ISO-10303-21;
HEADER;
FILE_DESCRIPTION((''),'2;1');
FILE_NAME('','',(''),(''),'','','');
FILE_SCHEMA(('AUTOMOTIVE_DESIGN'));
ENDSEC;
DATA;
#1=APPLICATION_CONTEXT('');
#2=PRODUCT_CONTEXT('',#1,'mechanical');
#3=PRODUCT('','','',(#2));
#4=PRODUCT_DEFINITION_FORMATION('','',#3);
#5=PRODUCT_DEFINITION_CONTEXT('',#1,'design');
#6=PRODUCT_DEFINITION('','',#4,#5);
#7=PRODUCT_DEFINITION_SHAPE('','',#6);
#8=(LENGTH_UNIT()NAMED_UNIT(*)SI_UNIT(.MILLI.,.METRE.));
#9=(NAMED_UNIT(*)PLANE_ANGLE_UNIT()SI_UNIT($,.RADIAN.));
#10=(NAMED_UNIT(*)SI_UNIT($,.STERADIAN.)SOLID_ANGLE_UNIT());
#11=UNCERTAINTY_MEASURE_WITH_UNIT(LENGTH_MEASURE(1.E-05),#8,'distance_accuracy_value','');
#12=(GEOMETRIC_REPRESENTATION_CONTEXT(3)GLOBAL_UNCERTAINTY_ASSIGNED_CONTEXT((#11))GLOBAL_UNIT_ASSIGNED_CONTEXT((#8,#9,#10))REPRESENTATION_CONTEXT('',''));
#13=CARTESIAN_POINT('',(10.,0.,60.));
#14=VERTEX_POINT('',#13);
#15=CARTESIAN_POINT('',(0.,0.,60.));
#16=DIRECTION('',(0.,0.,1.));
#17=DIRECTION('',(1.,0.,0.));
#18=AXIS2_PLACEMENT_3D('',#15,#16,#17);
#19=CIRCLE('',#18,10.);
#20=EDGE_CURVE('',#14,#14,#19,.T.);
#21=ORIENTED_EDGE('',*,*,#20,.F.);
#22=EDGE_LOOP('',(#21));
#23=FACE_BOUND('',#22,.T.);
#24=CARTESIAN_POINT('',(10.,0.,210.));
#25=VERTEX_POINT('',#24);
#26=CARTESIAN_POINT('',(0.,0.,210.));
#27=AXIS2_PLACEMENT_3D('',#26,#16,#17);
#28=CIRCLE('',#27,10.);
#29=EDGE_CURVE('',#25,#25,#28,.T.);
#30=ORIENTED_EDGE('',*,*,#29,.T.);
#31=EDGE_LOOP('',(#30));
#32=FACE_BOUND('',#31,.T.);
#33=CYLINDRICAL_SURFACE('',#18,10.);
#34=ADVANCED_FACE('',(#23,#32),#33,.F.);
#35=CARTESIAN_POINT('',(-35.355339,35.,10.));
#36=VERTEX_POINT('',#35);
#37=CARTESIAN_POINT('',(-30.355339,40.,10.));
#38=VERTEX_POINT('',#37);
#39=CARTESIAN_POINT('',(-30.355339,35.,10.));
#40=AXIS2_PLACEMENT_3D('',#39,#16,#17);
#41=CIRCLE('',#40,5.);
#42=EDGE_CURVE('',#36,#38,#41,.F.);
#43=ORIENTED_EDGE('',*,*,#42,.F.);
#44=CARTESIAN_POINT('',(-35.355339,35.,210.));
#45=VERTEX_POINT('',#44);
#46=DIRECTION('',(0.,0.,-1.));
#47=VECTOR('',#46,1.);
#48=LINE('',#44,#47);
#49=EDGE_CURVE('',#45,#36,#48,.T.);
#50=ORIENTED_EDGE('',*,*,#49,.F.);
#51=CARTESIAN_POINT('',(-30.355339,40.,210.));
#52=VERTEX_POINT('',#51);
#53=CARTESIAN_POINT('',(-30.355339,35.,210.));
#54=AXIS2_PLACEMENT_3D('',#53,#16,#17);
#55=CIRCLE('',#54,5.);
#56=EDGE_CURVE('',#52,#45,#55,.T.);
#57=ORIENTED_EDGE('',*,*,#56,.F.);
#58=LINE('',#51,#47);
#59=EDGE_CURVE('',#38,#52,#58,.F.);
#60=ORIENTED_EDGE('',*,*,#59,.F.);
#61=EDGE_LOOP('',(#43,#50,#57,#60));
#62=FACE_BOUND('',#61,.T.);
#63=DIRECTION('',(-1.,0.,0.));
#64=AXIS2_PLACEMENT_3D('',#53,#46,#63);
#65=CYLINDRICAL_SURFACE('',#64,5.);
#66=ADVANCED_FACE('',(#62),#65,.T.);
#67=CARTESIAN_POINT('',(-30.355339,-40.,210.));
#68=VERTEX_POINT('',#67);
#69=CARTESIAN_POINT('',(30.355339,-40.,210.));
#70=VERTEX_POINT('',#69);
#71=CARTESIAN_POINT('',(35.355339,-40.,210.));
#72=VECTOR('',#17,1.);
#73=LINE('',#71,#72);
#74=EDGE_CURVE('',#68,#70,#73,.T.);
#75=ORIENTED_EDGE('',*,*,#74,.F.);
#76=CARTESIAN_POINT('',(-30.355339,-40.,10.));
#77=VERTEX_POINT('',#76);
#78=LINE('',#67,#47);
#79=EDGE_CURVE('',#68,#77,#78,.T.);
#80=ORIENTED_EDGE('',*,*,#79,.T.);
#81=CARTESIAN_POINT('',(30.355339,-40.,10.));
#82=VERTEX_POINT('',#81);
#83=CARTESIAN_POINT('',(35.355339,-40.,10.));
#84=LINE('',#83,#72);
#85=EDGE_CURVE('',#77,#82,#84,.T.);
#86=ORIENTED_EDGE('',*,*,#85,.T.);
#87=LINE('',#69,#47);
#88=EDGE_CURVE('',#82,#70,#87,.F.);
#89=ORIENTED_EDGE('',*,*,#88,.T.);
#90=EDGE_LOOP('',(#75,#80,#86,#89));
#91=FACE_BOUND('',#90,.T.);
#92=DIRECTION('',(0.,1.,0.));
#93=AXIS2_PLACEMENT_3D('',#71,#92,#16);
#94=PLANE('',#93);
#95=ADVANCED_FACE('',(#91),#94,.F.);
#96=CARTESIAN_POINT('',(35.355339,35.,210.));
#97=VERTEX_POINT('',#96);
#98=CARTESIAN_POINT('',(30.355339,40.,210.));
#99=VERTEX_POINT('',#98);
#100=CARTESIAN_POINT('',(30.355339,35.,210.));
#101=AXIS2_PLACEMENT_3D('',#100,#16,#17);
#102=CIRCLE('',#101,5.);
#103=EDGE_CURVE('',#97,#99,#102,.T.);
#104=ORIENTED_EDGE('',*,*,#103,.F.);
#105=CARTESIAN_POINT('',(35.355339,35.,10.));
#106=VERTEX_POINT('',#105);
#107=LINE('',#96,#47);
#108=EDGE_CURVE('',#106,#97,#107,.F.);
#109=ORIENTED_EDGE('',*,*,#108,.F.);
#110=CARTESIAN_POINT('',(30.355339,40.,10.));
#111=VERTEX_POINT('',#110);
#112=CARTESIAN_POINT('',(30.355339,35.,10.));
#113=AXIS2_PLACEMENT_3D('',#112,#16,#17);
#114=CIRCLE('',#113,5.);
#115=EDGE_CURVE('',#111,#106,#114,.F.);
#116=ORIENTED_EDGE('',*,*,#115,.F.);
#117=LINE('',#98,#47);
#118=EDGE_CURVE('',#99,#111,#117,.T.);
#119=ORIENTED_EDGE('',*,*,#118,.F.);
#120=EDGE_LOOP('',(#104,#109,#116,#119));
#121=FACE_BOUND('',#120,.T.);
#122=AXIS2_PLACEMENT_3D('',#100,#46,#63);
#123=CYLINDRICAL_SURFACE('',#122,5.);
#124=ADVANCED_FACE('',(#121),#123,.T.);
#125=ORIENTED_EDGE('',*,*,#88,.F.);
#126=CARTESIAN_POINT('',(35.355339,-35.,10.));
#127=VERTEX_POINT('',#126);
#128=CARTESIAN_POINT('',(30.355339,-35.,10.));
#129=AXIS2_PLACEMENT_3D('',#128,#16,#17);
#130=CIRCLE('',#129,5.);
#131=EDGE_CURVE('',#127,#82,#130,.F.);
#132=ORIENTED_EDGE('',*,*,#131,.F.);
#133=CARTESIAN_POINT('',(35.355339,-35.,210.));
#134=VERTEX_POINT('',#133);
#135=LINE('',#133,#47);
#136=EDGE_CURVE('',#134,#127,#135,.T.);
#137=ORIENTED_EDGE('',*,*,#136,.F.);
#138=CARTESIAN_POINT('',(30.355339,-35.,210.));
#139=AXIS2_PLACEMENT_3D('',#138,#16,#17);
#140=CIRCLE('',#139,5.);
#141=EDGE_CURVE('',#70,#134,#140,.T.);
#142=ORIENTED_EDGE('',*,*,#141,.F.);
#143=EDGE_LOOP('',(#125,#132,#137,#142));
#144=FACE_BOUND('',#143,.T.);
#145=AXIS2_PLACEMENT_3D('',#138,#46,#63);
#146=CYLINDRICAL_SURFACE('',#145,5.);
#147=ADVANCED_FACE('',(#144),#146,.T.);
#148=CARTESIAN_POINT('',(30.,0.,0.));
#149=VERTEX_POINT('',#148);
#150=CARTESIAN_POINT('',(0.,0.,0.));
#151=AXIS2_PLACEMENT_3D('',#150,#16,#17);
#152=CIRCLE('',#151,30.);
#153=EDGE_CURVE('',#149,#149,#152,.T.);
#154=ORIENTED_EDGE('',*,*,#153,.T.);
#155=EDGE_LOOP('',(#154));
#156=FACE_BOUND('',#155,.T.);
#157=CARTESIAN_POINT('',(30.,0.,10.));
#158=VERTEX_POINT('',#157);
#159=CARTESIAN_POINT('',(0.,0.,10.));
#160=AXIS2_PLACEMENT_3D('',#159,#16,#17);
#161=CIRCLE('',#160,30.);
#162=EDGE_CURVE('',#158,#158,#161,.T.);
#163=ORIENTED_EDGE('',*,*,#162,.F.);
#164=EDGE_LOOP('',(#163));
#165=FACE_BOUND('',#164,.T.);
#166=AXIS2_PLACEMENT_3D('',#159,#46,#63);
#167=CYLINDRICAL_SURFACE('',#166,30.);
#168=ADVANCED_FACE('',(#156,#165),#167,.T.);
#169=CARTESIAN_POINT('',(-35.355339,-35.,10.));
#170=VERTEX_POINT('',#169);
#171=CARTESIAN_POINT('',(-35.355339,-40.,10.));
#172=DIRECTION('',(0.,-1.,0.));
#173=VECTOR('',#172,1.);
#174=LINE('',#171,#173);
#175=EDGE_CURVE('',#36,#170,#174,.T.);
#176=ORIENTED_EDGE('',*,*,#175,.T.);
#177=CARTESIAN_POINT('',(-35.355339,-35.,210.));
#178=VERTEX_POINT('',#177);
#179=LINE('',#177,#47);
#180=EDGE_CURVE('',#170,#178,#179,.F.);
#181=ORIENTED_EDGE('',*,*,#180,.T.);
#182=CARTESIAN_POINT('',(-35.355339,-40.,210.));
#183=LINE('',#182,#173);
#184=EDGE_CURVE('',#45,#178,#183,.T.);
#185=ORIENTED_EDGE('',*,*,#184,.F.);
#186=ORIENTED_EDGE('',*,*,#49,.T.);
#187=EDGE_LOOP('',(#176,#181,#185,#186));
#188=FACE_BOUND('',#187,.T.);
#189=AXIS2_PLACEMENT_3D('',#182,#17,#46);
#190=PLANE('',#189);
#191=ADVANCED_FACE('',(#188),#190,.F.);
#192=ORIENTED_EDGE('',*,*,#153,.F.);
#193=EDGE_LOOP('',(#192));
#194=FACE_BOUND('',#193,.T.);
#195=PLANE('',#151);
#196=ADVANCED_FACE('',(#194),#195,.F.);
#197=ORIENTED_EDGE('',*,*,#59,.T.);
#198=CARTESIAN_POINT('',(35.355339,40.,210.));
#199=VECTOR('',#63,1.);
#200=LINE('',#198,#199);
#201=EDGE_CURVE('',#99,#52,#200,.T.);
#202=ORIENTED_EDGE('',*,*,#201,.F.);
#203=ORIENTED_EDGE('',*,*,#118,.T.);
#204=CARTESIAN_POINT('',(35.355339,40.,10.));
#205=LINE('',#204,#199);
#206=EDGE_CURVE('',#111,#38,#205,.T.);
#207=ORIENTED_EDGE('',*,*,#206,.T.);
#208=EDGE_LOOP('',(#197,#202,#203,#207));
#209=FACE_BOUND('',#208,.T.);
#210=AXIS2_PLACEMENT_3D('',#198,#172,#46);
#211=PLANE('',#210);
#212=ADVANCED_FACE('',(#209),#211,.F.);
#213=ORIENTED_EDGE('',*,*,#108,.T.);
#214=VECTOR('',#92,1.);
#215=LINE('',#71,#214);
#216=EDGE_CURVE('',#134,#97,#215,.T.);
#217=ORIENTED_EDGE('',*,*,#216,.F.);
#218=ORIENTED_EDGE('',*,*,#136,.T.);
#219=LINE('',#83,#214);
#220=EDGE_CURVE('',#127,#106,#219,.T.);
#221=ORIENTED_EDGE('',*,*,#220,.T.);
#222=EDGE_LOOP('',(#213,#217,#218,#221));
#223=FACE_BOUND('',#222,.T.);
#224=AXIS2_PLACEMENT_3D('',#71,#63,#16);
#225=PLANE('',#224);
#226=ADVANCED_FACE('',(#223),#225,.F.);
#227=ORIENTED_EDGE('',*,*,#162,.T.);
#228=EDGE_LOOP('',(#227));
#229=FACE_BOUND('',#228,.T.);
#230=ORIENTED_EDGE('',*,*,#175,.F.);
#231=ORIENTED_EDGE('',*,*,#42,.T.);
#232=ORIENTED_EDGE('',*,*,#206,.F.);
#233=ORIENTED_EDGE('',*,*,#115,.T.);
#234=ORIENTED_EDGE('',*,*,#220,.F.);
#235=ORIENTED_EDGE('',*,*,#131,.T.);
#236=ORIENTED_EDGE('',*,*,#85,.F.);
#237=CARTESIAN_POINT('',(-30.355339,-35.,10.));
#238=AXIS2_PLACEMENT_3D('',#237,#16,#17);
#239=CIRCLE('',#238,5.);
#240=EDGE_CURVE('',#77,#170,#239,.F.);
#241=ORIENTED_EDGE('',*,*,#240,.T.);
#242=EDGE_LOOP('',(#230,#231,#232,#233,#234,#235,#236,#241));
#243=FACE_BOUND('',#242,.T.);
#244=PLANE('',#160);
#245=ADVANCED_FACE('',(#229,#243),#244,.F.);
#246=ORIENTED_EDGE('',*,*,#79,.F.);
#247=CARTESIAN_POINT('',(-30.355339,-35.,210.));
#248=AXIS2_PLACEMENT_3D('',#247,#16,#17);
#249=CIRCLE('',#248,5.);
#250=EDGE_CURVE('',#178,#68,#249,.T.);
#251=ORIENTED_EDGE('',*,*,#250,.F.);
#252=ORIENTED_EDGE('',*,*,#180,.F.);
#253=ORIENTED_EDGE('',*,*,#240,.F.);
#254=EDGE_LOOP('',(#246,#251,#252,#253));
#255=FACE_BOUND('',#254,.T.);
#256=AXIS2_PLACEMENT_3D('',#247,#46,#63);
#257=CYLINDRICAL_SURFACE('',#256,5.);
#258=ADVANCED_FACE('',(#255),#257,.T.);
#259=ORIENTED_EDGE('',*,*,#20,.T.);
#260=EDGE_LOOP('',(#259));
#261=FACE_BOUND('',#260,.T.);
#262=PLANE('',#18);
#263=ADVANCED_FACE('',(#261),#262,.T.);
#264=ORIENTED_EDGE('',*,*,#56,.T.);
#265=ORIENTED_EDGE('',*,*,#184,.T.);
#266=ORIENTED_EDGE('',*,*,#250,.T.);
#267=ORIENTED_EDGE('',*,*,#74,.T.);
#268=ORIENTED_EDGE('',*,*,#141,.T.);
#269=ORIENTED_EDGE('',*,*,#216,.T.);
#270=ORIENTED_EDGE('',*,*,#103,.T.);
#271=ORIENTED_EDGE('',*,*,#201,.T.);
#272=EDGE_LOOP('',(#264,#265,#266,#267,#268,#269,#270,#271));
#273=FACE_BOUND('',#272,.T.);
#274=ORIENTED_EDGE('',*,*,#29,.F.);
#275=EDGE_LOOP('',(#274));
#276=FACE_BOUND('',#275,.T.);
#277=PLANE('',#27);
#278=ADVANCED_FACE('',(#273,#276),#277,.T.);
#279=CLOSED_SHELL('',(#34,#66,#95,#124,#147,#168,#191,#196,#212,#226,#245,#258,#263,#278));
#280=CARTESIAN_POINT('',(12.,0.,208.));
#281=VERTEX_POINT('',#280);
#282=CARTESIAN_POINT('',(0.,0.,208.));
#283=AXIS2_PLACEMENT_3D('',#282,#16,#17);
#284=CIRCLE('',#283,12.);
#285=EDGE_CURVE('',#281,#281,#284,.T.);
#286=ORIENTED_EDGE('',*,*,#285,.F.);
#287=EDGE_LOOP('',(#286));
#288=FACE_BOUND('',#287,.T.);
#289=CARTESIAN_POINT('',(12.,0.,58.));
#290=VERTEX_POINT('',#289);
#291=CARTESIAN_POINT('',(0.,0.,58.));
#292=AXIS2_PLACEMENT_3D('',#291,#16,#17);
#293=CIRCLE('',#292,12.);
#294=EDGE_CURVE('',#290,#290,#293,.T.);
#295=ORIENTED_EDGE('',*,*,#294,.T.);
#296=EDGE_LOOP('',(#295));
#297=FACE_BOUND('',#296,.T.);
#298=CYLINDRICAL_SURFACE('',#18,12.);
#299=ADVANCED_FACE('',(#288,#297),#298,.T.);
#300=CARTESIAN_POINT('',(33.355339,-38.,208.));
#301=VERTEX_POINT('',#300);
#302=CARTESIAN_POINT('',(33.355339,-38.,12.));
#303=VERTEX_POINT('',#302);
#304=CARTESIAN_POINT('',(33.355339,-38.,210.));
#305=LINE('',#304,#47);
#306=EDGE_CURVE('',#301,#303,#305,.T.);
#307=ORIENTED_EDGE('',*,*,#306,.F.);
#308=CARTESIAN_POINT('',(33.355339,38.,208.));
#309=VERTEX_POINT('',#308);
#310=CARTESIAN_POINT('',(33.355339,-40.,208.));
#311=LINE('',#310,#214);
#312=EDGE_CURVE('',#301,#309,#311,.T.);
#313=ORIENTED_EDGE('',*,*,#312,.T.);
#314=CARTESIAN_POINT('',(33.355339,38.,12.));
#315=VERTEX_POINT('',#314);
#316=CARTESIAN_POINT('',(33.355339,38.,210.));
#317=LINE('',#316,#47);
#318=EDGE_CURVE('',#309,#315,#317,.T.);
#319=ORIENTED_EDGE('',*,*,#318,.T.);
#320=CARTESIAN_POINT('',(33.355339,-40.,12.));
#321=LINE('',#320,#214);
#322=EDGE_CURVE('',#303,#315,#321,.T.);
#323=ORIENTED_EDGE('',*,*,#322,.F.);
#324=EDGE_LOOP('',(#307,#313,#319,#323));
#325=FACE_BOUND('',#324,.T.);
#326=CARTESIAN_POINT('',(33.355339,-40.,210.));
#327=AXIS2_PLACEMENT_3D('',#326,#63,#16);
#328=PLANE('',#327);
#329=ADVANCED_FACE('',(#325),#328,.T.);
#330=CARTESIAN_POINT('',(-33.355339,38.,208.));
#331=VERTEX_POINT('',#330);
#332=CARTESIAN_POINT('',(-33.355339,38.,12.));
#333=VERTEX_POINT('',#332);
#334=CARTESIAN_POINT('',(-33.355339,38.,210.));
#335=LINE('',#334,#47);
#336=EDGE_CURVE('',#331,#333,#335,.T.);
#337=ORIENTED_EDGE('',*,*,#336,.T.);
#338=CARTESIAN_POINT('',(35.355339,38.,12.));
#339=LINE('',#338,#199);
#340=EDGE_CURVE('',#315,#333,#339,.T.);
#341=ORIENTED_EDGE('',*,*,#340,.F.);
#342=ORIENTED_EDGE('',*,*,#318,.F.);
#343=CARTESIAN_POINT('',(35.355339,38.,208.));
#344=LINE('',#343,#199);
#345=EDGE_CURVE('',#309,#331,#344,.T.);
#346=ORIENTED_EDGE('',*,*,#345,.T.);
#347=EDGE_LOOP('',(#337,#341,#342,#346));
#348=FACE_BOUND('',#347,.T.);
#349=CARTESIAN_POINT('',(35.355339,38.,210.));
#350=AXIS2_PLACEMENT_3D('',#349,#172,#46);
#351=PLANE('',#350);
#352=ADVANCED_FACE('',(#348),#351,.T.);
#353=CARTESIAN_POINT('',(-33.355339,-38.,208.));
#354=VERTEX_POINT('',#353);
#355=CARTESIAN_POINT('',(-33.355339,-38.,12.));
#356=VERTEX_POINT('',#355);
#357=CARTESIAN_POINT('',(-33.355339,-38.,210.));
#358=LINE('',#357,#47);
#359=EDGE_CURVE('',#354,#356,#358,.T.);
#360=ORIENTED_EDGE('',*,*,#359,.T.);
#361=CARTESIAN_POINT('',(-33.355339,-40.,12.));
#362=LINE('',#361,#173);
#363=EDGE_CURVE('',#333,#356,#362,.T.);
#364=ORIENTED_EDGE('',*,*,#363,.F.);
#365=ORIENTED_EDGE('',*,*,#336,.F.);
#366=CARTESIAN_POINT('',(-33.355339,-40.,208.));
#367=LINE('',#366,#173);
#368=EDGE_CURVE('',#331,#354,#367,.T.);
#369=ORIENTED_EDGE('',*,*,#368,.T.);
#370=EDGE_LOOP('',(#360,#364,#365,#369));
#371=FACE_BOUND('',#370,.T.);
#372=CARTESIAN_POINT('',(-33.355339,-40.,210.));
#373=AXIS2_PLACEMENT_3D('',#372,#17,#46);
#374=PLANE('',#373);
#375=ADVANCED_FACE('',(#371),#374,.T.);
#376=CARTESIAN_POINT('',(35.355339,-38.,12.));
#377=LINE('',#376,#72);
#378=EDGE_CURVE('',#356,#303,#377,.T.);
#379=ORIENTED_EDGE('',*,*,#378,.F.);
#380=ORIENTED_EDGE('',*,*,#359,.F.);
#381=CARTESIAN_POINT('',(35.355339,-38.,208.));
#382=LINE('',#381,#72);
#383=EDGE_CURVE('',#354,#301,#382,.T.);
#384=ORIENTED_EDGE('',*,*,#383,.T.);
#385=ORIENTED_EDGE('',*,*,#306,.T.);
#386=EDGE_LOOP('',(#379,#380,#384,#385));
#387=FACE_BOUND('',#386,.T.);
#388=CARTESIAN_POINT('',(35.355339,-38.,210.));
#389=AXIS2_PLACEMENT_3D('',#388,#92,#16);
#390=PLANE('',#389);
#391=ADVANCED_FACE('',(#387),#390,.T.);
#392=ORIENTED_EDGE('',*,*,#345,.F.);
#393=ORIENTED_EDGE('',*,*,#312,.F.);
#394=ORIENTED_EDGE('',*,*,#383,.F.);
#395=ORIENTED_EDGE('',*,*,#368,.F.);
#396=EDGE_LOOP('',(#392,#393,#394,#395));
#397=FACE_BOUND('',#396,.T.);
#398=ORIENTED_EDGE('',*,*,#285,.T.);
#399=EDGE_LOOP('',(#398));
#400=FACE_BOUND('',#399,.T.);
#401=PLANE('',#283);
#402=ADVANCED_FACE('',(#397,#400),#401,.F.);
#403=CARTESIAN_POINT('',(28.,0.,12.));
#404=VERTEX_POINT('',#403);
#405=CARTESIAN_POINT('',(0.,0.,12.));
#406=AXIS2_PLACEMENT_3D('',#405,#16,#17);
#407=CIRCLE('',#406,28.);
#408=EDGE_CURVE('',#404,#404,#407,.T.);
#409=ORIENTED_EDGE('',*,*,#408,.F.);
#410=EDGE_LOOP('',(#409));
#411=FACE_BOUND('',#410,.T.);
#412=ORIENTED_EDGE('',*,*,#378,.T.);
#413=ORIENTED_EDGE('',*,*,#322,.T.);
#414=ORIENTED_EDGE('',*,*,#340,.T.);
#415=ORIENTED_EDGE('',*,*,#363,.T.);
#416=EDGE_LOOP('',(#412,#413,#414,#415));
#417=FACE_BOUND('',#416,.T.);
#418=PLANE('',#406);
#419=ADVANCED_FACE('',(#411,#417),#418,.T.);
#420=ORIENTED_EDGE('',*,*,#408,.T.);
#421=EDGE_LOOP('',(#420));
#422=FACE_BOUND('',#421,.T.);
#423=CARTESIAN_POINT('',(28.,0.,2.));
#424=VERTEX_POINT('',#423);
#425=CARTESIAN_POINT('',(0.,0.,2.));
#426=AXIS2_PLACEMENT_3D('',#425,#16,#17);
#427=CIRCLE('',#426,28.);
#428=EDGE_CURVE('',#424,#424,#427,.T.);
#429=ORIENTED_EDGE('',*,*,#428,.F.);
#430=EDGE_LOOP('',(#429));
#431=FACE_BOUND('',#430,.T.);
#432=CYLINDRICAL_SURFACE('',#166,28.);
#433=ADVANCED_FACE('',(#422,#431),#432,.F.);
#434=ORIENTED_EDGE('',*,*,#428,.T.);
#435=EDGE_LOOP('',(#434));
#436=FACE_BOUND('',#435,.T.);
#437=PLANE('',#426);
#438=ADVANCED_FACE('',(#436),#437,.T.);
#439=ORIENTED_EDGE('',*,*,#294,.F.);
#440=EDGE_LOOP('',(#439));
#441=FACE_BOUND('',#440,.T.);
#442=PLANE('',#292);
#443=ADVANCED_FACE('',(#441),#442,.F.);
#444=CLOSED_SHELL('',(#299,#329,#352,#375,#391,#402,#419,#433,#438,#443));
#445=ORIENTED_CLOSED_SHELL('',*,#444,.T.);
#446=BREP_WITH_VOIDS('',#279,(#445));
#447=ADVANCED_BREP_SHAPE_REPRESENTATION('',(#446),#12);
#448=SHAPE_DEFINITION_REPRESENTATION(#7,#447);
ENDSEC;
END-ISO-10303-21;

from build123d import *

# Parameters (mm, degrees)
SKETCH1_R           = 30
BOSS_EXTRUDE1_DEPTH = 10
SKETCH2_W           = 70.710678118
SKETCH2_H           = 80
BOSS_EXTRUDE2_DEPTH = 200
SKETCH3_R           = 10
CUT_EXTRUDE1_DEPTH  = 150
SHELL1_START        = 12
SHELL1_OUTLINE_W    = 66.710678118
SHELL1_OUTLINE_H    = 76
SHELL1_OUTLINE_R    = 12
SHELL1_DEPTH        = 196
SHELL1_START_2      = 2
SHELL1_2_OUTLINE_R  = 28
SHELL1_2_DEPTH      = 56
FILLET1_R           = 5


# Read off the part's stored shape, not the designer's step: Shell1
with BuildPart() as part:
    # Sketch1 → Boss-Extrude1 (new body)
    with BuildSketch(Plane.XY):
        Circle(SKETCH1_R)
    extrude(amount=BOSS_EXTRUDE1_DEPTH)

    # Sketch2 → Boss-Extrude2 (add)
    with BuildSketch(Plane.XY.offset(10)):
        Rectangle(SKETCH2_W, SKETCH2_H)
    extrude(amount=BOSS_EXTRUDE2_DEPTH)

    # Sketch3 → Cut-Extrude1 (cut)
    with BuildSketch(Plane.XY.offset(210)):
        Circle(SKETCH3_R)
    extrude(amount=-CUT_EXTRUDE1_DEPTH, mode=Mode.SUBTRACT)

    # Shell1 outline → Shell1 (cut)
    with BuildSketch(Plane.XY.offset(SHELL1_START)):
        Rectangle(SHELL1_OUTLINE_W, SHELL1_OUTLINE_H)
        Circle(SHELL1_OUTLINE_R, mode=Mode.SUBTRACT)
    extrude(amount=SHELL1_DEPTH, mode=Mode.SUBTRACT)

    # Shell1 2 outline → Shell1 2 (cut)
    with BuildSketch(Plane.XY.offset(SHELL1_START_2)):
        Circle(SHELL1_2_OUTLINE_R)
    extrude(amount=SHELL1_2_DEPTH, mode=Mode.SUBTRACT)

    # Fillet1
    fillet1_edges = [part.edges().sort_by_distance(p)[0] for p in [
        (-35.355339059, 40, 110),
        (-35.355339059, -40, 110),
        (35.355339059, -40, 110),
        (35.355339059, 40, 110),
    ]]
    fillet(fillet1_edges, radius=FILLET1_R)


solid = part.part
